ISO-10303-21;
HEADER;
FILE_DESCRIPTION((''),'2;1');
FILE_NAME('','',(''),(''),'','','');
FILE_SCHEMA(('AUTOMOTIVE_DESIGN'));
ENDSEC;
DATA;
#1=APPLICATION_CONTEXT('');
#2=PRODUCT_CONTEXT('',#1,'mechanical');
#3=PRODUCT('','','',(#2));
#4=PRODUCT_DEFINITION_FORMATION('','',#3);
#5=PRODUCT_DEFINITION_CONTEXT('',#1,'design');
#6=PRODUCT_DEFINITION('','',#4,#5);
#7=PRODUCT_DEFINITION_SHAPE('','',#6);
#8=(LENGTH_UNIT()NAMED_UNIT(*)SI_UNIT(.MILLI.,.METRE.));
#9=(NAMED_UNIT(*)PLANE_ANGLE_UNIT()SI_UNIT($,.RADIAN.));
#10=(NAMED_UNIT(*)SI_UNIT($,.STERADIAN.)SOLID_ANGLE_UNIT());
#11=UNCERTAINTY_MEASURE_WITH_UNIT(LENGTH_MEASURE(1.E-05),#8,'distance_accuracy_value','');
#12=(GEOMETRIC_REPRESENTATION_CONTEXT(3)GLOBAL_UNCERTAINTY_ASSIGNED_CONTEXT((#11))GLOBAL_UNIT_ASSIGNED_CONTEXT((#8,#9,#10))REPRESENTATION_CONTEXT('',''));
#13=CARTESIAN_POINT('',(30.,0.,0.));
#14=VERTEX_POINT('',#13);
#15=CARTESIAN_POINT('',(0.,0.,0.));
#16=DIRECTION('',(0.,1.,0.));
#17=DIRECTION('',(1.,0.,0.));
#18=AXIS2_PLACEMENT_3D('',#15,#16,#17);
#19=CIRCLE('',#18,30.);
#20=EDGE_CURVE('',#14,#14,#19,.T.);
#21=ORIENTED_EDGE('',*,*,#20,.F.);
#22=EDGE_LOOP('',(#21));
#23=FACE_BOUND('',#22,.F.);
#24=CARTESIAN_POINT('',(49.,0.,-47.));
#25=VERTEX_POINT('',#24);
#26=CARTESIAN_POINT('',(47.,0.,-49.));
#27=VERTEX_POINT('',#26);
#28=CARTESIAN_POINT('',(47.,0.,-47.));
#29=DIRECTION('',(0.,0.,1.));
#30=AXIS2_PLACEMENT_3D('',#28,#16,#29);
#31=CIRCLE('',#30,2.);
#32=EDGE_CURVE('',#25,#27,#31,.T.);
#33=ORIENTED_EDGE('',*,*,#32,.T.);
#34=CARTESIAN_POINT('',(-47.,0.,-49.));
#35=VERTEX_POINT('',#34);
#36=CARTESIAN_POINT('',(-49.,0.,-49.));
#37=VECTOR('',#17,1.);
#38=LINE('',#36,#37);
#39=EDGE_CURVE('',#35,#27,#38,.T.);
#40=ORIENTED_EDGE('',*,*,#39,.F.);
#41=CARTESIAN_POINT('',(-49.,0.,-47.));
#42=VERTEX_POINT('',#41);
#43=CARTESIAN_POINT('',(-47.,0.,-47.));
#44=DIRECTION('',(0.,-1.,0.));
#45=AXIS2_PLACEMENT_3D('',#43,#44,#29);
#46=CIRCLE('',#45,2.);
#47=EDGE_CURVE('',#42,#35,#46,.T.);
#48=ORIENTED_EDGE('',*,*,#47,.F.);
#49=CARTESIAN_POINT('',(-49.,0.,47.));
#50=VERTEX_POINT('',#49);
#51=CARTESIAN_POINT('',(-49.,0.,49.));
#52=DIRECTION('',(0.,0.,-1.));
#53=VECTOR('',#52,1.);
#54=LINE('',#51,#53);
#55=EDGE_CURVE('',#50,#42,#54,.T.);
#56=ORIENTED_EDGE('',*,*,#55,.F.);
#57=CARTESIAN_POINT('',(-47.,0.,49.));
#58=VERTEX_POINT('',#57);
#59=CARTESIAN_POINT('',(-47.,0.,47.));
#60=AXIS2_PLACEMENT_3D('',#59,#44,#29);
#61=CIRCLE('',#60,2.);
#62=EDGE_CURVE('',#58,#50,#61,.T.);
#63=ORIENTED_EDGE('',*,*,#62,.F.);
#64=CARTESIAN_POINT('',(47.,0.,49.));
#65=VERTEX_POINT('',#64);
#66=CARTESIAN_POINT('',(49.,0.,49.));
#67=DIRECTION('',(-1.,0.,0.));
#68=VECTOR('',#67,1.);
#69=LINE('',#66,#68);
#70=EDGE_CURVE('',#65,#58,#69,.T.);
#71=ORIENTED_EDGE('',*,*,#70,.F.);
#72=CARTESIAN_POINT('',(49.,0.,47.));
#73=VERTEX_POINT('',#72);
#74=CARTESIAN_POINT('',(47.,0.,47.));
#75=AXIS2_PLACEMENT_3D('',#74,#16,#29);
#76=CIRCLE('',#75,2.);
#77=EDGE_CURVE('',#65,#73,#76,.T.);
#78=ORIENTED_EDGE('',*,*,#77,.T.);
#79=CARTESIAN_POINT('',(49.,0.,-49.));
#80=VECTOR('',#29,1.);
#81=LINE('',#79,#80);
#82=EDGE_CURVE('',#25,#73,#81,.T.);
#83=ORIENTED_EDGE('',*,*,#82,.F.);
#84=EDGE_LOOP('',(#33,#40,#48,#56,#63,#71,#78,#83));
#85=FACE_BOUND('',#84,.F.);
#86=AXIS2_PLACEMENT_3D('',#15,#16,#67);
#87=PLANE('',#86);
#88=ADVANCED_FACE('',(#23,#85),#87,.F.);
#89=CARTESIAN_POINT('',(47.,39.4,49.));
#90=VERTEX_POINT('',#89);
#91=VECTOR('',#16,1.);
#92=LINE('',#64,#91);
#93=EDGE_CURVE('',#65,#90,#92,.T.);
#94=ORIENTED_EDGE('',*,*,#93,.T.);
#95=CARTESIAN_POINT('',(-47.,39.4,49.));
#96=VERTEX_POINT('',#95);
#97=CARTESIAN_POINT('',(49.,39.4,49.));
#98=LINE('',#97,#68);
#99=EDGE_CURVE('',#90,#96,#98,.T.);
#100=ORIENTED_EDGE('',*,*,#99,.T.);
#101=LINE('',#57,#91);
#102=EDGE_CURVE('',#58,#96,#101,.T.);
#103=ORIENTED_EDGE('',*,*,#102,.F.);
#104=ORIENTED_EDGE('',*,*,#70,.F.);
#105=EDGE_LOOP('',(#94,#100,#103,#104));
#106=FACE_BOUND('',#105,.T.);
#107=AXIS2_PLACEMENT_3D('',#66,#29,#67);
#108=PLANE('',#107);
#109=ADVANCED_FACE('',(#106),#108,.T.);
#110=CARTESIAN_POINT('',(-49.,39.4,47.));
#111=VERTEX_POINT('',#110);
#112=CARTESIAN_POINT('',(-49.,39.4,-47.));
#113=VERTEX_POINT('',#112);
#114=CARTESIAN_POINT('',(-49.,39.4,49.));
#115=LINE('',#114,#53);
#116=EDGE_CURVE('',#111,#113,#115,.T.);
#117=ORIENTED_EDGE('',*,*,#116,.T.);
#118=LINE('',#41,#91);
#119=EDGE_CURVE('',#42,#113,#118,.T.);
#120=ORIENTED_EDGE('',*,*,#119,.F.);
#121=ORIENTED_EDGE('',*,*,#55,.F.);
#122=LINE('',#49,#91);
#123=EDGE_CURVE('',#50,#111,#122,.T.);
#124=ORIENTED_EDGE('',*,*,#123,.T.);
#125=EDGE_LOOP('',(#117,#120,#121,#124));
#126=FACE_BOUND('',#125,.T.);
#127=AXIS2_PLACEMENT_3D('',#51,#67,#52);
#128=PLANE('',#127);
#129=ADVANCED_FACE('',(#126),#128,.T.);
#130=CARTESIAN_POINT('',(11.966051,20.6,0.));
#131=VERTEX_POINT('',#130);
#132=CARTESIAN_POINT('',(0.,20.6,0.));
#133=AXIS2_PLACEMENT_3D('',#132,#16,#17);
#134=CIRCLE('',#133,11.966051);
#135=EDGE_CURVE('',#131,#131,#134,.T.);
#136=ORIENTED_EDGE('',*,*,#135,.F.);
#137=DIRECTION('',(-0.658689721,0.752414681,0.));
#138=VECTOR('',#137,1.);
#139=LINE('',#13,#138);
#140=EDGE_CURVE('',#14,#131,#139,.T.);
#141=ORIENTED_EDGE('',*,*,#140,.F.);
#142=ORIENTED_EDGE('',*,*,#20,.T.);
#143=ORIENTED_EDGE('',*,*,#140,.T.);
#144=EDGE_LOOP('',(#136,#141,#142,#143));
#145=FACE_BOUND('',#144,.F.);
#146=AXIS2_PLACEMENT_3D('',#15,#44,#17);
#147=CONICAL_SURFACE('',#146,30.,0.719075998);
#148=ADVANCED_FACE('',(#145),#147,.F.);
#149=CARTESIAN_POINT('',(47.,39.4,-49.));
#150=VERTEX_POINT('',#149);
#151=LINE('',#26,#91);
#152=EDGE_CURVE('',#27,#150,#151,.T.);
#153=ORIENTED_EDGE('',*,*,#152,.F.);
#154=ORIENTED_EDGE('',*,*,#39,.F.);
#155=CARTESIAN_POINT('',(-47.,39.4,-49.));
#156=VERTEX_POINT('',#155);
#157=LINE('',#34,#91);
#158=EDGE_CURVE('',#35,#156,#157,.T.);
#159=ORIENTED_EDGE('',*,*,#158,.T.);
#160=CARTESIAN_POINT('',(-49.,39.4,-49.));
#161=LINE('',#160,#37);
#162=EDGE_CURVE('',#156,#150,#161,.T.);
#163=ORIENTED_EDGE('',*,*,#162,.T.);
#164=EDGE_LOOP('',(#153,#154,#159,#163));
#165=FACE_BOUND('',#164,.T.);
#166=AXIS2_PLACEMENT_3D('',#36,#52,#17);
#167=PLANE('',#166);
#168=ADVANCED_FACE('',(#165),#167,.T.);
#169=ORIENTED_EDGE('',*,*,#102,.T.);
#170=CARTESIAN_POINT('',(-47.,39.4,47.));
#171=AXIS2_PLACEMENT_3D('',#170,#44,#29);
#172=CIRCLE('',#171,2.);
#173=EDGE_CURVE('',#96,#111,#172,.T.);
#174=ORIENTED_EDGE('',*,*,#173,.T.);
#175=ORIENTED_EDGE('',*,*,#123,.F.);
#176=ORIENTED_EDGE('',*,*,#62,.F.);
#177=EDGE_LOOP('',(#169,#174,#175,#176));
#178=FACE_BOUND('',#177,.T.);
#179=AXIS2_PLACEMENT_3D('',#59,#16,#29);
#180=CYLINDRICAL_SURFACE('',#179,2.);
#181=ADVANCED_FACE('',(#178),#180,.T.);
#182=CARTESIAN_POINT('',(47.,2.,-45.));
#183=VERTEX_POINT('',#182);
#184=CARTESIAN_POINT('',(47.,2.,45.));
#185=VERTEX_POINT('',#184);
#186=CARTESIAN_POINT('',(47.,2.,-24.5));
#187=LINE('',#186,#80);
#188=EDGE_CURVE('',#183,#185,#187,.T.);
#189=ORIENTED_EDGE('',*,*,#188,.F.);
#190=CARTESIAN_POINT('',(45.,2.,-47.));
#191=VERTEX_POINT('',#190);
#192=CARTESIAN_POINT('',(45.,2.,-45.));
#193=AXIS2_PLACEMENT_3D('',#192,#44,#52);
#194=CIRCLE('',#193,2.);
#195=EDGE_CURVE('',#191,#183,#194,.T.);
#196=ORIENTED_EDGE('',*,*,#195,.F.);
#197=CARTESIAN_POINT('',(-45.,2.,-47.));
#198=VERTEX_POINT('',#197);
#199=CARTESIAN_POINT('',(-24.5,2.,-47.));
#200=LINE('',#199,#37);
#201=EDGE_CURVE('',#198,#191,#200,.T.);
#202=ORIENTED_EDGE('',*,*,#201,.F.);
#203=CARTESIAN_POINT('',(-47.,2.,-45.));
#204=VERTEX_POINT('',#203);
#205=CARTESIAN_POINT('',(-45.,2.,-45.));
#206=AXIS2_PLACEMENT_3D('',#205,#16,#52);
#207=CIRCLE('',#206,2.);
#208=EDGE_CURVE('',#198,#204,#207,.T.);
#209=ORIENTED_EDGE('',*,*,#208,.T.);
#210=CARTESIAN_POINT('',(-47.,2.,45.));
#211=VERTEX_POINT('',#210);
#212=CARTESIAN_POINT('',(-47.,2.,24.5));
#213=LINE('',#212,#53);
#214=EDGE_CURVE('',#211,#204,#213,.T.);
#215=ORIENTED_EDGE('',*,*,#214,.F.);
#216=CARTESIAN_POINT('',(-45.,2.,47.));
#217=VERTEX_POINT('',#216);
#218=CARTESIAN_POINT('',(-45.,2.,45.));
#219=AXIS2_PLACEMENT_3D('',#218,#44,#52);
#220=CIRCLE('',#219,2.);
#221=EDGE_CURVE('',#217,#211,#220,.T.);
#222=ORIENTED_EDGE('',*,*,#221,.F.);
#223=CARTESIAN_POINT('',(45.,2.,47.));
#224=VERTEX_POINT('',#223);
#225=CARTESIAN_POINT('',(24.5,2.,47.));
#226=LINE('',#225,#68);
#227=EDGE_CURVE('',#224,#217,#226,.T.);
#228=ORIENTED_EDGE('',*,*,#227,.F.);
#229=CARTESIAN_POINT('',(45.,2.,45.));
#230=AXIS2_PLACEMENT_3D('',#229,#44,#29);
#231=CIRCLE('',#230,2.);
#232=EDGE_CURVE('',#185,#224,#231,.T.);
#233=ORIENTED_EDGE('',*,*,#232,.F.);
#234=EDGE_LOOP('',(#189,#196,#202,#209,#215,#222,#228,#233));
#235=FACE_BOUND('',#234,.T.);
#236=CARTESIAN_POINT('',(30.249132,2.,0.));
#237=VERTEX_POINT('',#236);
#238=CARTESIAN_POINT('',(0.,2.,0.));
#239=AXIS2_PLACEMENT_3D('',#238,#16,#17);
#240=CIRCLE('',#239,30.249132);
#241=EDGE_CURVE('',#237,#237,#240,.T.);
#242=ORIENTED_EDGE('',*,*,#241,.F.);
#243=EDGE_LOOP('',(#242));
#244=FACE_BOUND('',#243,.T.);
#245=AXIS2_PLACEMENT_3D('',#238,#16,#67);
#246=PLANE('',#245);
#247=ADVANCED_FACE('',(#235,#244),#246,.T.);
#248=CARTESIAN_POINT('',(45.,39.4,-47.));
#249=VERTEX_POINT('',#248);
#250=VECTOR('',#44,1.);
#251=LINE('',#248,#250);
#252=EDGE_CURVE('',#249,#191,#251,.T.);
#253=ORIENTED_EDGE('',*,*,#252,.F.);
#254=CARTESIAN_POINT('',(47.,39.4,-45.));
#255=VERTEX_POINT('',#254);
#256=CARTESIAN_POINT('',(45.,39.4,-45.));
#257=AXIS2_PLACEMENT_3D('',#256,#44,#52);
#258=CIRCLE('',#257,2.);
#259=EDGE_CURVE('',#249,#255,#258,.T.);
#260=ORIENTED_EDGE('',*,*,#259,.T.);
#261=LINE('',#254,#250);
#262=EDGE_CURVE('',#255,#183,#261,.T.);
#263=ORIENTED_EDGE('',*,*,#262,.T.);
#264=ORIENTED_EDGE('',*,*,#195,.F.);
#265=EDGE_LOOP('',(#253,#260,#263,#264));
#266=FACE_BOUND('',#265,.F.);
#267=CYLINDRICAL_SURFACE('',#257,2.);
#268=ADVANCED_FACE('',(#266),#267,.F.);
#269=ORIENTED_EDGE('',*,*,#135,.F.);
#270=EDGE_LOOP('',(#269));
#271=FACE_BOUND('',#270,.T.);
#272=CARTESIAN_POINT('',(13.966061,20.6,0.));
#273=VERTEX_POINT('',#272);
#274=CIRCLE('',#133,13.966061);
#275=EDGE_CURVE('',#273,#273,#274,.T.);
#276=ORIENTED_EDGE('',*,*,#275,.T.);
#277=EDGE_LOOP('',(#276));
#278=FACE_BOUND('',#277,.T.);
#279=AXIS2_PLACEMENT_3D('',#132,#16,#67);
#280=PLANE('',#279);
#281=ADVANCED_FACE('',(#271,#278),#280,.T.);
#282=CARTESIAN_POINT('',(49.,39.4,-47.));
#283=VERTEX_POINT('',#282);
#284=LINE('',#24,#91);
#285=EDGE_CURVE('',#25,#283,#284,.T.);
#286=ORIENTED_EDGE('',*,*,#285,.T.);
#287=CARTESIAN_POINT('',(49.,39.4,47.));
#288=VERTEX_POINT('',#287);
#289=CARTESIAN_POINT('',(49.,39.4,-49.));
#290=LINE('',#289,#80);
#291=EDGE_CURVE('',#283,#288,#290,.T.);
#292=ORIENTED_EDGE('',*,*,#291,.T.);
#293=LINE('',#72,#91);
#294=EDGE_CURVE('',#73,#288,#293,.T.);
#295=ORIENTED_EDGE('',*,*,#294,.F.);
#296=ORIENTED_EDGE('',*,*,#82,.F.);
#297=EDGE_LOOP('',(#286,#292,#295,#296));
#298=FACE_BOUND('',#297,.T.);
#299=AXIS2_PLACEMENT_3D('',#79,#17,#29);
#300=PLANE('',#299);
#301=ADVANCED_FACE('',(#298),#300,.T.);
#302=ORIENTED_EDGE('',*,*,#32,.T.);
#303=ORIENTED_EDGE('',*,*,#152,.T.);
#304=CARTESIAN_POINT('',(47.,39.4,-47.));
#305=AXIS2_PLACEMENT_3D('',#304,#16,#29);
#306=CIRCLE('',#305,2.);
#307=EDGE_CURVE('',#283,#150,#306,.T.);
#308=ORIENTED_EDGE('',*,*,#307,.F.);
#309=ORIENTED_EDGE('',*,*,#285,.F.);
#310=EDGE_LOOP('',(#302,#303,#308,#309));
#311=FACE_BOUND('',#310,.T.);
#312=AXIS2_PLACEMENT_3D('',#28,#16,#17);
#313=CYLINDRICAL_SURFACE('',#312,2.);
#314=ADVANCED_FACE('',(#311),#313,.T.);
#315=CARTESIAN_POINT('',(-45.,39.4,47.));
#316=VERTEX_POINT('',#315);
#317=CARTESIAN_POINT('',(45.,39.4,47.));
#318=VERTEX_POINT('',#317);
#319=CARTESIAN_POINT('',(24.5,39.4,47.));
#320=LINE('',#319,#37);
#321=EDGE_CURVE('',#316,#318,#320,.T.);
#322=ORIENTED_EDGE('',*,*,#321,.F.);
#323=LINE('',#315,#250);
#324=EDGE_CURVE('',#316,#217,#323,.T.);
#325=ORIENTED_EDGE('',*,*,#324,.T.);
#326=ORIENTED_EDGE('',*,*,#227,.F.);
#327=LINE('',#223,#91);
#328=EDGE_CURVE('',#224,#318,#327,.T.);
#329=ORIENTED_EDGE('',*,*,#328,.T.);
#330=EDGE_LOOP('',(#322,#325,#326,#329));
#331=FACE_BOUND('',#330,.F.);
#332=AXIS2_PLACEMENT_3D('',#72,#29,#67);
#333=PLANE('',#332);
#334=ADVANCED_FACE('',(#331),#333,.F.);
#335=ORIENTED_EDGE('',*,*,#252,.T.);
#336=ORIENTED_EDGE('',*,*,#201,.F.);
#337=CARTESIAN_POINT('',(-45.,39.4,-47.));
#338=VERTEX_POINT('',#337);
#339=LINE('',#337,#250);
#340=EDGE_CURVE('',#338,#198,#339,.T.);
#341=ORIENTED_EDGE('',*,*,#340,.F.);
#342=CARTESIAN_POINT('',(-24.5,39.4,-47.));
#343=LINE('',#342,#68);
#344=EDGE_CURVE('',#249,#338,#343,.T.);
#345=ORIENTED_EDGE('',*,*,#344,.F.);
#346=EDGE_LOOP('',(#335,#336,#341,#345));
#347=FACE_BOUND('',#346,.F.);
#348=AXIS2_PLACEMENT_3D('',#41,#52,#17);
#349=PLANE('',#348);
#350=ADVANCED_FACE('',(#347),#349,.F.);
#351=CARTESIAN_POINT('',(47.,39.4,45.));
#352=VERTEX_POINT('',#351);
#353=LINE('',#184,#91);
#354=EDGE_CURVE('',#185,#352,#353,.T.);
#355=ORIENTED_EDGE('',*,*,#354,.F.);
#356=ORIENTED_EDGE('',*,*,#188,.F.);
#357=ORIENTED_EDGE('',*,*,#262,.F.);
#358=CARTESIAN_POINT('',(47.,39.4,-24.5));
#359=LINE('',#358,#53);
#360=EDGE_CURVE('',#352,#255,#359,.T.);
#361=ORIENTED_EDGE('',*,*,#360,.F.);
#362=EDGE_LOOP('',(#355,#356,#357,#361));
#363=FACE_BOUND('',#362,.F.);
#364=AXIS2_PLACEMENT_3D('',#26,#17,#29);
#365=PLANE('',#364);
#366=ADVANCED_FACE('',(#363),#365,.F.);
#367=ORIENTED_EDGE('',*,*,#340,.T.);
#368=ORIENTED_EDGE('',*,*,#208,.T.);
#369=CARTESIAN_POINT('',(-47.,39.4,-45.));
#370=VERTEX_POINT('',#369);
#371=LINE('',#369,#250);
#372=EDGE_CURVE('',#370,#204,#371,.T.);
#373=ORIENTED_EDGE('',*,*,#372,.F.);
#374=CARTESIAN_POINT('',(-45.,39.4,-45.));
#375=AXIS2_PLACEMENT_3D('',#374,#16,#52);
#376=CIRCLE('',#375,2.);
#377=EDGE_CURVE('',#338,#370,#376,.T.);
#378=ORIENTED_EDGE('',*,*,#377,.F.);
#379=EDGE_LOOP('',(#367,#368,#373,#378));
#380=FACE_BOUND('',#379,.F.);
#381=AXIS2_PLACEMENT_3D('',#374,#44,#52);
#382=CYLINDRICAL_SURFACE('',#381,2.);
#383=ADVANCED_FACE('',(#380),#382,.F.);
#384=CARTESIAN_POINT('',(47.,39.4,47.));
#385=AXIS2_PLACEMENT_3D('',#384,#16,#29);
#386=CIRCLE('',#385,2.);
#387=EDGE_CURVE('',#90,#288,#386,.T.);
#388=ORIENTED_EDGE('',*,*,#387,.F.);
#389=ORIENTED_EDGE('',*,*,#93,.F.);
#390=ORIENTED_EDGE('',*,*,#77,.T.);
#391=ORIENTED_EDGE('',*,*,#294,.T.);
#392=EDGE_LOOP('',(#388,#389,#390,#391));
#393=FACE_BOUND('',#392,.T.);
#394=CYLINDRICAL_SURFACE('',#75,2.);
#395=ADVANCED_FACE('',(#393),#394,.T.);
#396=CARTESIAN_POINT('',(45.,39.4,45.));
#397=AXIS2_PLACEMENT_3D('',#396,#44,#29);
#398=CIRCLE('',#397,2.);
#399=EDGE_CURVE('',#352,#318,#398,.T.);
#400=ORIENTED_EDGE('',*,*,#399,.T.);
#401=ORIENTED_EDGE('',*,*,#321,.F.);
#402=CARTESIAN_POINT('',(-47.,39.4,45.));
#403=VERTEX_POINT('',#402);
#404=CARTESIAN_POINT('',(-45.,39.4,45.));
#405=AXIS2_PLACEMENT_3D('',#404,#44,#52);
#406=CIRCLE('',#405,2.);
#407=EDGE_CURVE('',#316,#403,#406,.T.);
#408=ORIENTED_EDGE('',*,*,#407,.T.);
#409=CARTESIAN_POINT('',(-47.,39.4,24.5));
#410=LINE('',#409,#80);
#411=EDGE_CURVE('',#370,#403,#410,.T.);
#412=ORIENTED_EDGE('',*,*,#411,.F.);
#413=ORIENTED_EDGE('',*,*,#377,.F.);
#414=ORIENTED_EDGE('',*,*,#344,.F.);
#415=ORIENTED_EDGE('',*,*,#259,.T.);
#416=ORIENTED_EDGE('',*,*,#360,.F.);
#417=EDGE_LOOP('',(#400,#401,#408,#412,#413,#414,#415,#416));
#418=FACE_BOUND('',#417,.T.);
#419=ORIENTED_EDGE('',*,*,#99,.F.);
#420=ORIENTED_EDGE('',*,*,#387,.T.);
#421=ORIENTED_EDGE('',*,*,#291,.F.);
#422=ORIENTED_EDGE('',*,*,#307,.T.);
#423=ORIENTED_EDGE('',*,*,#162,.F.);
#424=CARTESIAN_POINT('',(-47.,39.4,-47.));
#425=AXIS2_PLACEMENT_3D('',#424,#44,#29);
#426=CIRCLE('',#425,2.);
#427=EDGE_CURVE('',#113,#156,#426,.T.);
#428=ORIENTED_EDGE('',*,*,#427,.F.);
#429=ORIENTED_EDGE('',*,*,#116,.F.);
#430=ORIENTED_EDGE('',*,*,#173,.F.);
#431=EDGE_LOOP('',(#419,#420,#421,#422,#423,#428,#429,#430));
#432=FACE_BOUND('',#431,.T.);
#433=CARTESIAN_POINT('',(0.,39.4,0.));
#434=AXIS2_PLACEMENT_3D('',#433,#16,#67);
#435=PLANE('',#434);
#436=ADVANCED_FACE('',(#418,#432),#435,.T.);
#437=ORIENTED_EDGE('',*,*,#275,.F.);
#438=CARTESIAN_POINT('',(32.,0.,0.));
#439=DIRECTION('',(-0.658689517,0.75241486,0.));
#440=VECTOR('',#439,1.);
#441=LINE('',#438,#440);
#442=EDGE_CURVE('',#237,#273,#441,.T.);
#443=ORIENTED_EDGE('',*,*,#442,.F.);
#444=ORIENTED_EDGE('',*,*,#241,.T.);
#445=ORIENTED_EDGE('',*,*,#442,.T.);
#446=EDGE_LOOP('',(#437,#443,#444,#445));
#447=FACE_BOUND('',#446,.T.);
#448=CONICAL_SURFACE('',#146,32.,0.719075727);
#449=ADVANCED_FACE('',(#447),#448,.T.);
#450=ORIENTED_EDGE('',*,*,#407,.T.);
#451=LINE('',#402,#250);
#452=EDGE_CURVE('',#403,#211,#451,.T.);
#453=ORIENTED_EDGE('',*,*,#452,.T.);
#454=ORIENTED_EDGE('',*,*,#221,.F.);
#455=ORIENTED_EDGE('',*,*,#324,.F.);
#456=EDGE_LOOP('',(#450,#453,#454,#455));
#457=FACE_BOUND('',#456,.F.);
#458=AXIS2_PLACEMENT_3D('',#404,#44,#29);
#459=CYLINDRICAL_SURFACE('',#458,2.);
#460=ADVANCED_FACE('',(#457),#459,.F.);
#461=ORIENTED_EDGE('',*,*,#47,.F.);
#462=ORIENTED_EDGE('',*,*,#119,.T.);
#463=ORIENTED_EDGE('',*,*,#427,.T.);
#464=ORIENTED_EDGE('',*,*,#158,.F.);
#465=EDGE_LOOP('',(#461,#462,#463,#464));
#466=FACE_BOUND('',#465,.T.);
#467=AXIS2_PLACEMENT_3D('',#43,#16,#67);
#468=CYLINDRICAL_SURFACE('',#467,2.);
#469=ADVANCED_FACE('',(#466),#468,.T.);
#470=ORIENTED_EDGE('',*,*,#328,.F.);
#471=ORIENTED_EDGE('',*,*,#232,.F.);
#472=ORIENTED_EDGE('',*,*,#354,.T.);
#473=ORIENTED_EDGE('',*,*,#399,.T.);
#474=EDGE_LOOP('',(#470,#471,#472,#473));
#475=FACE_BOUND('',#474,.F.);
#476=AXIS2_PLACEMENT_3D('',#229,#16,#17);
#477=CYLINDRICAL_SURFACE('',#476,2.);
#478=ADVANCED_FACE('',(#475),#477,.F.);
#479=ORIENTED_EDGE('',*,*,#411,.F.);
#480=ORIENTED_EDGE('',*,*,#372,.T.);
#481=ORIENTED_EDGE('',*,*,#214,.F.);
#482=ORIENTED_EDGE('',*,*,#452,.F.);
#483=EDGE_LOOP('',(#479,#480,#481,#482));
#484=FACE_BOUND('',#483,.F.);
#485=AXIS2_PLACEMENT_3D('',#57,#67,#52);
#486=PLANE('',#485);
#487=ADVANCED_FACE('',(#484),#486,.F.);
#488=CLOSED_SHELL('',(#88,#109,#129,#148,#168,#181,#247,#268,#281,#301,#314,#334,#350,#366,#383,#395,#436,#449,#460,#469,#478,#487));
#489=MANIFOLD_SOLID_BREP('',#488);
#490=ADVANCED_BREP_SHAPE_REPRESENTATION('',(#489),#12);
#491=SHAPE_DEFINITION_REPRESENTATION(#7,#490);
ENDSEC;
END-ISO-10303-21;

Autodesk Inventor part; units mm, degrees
ref_plane "YZ Plane" through (0, 0, 0) normal (1, 0, 0) x (0, 1, 0)
ref_plane "XY Plane" through (0, 0, 0) normal (0, 0, 1) x (1, 0, 0)
sketch "Esboço1" plane through (0, 0, 0) normal (0, 1, 0) x (-1, 0, 0)
  line L0 (-49, 49) -> (49, 49)
  line L1 (49, 49) -> (49, -49)
  line L2 (49, -49) -> (-49, -49)
  line L3 (-49, -49) -> (-49, 49)
  line L4 (-49, 49) -> (49, -49) construction
  line L5 (49, 49) -> (-49, -49) construction
  point P0 (0, 0)
  dimension "d0" = 98
  dimension "d1" = 98
extrude "Extrusão1" add sketch "Esboço1" along normal blind 39.4
shell "Casca1" thickness 2 removed faces 1 at (16.3333, 39.4, 16.3333)
sketch "Esboço3" plane through (0, 0, 0) normal (0, 0, 1) x (1, 0, 0)
  line L0 (0, 0) -> (32, 0)
  line L1 (49, 0) -> (-49, 0) projected
  line L2 (32, 0) -> (0, 36.5533)
  line L3 (0, 0) -> (0, 36.5533)
  point P0 (-43.1, 0)
  dimension "d6" = 32
  dimension "d7" = 48.8
revolve "Revolução1" add sketch "Esboço3" angle 360 about axis through (0, 0, 0) along (0, 1, 0)
sketch "Esboço4" plane through (0, 0, 0) normal (0, 0, 1) x (1, 0, 0)
  line L0 (0, 0) -> (30, 0)
  line L1 (-49, 0) -> (49, 0) projected
  line L2 (0, 36.5533) -> (-30.2491, 2) projected
  line L3 (30, 0) -> (0, 34.2687)
  line L4 (0, 0) -> (0, 34.2687)
  point P0 (43.1, 0)
  dimension "d9" = 30
  dimension "d10" = 48.8
revolve "Revolução2" cut sketch "Esboço4" angle 360 about axis through (0, 0, 0) along (0, 1, 0)
ref_plane "Plano de trabalho1" through (0, 39.4, 0) normal (0, 1, 0) x (-1, 0, 0)
sketch "Esboço5" plane through (0, 39.4, 0) normal (0, 1, 0) x (-1, 0, 0)
  line L0 (31.6566, 29.5617) -> (-31.6566, 29.5617)
  line L1 (-31.6566, 29.5617) -> (-31.6566, -29.5617)
  line L2 (-31.6566, -29.5617) -> (31.6566, -29.5617)
  line L3 (31.6566, -29.5617) -> (31.6566, 29.5617)
  line L4 (31.6566, 29.5617) -> (-31.6566, -29.5617) construction
  line L5 (-31.6566, 29.5617) -> (31.6566, -29.5617) construction
  point P0 (0, 0)
extrude "Extrusão2" cut sketch "Esboço5" against normal blind 18.8
sketch "Esboço6" plane through (0, 0, 0) normal (0, 1, 0) x (-1, 0, 0)
  point P0 (0, 0)
fillet "Arredondamento2" radius 2 8 edges at (47, 20.7, 47) (49, 19.7, 49) (-47, 20.7, 47) (-49, 19.7, 49) (-49, 19.7, -49) (-47, 20.7, -47) (49, 19.7, -49) (47, 20.7, -47)
properties part number "contenção"
